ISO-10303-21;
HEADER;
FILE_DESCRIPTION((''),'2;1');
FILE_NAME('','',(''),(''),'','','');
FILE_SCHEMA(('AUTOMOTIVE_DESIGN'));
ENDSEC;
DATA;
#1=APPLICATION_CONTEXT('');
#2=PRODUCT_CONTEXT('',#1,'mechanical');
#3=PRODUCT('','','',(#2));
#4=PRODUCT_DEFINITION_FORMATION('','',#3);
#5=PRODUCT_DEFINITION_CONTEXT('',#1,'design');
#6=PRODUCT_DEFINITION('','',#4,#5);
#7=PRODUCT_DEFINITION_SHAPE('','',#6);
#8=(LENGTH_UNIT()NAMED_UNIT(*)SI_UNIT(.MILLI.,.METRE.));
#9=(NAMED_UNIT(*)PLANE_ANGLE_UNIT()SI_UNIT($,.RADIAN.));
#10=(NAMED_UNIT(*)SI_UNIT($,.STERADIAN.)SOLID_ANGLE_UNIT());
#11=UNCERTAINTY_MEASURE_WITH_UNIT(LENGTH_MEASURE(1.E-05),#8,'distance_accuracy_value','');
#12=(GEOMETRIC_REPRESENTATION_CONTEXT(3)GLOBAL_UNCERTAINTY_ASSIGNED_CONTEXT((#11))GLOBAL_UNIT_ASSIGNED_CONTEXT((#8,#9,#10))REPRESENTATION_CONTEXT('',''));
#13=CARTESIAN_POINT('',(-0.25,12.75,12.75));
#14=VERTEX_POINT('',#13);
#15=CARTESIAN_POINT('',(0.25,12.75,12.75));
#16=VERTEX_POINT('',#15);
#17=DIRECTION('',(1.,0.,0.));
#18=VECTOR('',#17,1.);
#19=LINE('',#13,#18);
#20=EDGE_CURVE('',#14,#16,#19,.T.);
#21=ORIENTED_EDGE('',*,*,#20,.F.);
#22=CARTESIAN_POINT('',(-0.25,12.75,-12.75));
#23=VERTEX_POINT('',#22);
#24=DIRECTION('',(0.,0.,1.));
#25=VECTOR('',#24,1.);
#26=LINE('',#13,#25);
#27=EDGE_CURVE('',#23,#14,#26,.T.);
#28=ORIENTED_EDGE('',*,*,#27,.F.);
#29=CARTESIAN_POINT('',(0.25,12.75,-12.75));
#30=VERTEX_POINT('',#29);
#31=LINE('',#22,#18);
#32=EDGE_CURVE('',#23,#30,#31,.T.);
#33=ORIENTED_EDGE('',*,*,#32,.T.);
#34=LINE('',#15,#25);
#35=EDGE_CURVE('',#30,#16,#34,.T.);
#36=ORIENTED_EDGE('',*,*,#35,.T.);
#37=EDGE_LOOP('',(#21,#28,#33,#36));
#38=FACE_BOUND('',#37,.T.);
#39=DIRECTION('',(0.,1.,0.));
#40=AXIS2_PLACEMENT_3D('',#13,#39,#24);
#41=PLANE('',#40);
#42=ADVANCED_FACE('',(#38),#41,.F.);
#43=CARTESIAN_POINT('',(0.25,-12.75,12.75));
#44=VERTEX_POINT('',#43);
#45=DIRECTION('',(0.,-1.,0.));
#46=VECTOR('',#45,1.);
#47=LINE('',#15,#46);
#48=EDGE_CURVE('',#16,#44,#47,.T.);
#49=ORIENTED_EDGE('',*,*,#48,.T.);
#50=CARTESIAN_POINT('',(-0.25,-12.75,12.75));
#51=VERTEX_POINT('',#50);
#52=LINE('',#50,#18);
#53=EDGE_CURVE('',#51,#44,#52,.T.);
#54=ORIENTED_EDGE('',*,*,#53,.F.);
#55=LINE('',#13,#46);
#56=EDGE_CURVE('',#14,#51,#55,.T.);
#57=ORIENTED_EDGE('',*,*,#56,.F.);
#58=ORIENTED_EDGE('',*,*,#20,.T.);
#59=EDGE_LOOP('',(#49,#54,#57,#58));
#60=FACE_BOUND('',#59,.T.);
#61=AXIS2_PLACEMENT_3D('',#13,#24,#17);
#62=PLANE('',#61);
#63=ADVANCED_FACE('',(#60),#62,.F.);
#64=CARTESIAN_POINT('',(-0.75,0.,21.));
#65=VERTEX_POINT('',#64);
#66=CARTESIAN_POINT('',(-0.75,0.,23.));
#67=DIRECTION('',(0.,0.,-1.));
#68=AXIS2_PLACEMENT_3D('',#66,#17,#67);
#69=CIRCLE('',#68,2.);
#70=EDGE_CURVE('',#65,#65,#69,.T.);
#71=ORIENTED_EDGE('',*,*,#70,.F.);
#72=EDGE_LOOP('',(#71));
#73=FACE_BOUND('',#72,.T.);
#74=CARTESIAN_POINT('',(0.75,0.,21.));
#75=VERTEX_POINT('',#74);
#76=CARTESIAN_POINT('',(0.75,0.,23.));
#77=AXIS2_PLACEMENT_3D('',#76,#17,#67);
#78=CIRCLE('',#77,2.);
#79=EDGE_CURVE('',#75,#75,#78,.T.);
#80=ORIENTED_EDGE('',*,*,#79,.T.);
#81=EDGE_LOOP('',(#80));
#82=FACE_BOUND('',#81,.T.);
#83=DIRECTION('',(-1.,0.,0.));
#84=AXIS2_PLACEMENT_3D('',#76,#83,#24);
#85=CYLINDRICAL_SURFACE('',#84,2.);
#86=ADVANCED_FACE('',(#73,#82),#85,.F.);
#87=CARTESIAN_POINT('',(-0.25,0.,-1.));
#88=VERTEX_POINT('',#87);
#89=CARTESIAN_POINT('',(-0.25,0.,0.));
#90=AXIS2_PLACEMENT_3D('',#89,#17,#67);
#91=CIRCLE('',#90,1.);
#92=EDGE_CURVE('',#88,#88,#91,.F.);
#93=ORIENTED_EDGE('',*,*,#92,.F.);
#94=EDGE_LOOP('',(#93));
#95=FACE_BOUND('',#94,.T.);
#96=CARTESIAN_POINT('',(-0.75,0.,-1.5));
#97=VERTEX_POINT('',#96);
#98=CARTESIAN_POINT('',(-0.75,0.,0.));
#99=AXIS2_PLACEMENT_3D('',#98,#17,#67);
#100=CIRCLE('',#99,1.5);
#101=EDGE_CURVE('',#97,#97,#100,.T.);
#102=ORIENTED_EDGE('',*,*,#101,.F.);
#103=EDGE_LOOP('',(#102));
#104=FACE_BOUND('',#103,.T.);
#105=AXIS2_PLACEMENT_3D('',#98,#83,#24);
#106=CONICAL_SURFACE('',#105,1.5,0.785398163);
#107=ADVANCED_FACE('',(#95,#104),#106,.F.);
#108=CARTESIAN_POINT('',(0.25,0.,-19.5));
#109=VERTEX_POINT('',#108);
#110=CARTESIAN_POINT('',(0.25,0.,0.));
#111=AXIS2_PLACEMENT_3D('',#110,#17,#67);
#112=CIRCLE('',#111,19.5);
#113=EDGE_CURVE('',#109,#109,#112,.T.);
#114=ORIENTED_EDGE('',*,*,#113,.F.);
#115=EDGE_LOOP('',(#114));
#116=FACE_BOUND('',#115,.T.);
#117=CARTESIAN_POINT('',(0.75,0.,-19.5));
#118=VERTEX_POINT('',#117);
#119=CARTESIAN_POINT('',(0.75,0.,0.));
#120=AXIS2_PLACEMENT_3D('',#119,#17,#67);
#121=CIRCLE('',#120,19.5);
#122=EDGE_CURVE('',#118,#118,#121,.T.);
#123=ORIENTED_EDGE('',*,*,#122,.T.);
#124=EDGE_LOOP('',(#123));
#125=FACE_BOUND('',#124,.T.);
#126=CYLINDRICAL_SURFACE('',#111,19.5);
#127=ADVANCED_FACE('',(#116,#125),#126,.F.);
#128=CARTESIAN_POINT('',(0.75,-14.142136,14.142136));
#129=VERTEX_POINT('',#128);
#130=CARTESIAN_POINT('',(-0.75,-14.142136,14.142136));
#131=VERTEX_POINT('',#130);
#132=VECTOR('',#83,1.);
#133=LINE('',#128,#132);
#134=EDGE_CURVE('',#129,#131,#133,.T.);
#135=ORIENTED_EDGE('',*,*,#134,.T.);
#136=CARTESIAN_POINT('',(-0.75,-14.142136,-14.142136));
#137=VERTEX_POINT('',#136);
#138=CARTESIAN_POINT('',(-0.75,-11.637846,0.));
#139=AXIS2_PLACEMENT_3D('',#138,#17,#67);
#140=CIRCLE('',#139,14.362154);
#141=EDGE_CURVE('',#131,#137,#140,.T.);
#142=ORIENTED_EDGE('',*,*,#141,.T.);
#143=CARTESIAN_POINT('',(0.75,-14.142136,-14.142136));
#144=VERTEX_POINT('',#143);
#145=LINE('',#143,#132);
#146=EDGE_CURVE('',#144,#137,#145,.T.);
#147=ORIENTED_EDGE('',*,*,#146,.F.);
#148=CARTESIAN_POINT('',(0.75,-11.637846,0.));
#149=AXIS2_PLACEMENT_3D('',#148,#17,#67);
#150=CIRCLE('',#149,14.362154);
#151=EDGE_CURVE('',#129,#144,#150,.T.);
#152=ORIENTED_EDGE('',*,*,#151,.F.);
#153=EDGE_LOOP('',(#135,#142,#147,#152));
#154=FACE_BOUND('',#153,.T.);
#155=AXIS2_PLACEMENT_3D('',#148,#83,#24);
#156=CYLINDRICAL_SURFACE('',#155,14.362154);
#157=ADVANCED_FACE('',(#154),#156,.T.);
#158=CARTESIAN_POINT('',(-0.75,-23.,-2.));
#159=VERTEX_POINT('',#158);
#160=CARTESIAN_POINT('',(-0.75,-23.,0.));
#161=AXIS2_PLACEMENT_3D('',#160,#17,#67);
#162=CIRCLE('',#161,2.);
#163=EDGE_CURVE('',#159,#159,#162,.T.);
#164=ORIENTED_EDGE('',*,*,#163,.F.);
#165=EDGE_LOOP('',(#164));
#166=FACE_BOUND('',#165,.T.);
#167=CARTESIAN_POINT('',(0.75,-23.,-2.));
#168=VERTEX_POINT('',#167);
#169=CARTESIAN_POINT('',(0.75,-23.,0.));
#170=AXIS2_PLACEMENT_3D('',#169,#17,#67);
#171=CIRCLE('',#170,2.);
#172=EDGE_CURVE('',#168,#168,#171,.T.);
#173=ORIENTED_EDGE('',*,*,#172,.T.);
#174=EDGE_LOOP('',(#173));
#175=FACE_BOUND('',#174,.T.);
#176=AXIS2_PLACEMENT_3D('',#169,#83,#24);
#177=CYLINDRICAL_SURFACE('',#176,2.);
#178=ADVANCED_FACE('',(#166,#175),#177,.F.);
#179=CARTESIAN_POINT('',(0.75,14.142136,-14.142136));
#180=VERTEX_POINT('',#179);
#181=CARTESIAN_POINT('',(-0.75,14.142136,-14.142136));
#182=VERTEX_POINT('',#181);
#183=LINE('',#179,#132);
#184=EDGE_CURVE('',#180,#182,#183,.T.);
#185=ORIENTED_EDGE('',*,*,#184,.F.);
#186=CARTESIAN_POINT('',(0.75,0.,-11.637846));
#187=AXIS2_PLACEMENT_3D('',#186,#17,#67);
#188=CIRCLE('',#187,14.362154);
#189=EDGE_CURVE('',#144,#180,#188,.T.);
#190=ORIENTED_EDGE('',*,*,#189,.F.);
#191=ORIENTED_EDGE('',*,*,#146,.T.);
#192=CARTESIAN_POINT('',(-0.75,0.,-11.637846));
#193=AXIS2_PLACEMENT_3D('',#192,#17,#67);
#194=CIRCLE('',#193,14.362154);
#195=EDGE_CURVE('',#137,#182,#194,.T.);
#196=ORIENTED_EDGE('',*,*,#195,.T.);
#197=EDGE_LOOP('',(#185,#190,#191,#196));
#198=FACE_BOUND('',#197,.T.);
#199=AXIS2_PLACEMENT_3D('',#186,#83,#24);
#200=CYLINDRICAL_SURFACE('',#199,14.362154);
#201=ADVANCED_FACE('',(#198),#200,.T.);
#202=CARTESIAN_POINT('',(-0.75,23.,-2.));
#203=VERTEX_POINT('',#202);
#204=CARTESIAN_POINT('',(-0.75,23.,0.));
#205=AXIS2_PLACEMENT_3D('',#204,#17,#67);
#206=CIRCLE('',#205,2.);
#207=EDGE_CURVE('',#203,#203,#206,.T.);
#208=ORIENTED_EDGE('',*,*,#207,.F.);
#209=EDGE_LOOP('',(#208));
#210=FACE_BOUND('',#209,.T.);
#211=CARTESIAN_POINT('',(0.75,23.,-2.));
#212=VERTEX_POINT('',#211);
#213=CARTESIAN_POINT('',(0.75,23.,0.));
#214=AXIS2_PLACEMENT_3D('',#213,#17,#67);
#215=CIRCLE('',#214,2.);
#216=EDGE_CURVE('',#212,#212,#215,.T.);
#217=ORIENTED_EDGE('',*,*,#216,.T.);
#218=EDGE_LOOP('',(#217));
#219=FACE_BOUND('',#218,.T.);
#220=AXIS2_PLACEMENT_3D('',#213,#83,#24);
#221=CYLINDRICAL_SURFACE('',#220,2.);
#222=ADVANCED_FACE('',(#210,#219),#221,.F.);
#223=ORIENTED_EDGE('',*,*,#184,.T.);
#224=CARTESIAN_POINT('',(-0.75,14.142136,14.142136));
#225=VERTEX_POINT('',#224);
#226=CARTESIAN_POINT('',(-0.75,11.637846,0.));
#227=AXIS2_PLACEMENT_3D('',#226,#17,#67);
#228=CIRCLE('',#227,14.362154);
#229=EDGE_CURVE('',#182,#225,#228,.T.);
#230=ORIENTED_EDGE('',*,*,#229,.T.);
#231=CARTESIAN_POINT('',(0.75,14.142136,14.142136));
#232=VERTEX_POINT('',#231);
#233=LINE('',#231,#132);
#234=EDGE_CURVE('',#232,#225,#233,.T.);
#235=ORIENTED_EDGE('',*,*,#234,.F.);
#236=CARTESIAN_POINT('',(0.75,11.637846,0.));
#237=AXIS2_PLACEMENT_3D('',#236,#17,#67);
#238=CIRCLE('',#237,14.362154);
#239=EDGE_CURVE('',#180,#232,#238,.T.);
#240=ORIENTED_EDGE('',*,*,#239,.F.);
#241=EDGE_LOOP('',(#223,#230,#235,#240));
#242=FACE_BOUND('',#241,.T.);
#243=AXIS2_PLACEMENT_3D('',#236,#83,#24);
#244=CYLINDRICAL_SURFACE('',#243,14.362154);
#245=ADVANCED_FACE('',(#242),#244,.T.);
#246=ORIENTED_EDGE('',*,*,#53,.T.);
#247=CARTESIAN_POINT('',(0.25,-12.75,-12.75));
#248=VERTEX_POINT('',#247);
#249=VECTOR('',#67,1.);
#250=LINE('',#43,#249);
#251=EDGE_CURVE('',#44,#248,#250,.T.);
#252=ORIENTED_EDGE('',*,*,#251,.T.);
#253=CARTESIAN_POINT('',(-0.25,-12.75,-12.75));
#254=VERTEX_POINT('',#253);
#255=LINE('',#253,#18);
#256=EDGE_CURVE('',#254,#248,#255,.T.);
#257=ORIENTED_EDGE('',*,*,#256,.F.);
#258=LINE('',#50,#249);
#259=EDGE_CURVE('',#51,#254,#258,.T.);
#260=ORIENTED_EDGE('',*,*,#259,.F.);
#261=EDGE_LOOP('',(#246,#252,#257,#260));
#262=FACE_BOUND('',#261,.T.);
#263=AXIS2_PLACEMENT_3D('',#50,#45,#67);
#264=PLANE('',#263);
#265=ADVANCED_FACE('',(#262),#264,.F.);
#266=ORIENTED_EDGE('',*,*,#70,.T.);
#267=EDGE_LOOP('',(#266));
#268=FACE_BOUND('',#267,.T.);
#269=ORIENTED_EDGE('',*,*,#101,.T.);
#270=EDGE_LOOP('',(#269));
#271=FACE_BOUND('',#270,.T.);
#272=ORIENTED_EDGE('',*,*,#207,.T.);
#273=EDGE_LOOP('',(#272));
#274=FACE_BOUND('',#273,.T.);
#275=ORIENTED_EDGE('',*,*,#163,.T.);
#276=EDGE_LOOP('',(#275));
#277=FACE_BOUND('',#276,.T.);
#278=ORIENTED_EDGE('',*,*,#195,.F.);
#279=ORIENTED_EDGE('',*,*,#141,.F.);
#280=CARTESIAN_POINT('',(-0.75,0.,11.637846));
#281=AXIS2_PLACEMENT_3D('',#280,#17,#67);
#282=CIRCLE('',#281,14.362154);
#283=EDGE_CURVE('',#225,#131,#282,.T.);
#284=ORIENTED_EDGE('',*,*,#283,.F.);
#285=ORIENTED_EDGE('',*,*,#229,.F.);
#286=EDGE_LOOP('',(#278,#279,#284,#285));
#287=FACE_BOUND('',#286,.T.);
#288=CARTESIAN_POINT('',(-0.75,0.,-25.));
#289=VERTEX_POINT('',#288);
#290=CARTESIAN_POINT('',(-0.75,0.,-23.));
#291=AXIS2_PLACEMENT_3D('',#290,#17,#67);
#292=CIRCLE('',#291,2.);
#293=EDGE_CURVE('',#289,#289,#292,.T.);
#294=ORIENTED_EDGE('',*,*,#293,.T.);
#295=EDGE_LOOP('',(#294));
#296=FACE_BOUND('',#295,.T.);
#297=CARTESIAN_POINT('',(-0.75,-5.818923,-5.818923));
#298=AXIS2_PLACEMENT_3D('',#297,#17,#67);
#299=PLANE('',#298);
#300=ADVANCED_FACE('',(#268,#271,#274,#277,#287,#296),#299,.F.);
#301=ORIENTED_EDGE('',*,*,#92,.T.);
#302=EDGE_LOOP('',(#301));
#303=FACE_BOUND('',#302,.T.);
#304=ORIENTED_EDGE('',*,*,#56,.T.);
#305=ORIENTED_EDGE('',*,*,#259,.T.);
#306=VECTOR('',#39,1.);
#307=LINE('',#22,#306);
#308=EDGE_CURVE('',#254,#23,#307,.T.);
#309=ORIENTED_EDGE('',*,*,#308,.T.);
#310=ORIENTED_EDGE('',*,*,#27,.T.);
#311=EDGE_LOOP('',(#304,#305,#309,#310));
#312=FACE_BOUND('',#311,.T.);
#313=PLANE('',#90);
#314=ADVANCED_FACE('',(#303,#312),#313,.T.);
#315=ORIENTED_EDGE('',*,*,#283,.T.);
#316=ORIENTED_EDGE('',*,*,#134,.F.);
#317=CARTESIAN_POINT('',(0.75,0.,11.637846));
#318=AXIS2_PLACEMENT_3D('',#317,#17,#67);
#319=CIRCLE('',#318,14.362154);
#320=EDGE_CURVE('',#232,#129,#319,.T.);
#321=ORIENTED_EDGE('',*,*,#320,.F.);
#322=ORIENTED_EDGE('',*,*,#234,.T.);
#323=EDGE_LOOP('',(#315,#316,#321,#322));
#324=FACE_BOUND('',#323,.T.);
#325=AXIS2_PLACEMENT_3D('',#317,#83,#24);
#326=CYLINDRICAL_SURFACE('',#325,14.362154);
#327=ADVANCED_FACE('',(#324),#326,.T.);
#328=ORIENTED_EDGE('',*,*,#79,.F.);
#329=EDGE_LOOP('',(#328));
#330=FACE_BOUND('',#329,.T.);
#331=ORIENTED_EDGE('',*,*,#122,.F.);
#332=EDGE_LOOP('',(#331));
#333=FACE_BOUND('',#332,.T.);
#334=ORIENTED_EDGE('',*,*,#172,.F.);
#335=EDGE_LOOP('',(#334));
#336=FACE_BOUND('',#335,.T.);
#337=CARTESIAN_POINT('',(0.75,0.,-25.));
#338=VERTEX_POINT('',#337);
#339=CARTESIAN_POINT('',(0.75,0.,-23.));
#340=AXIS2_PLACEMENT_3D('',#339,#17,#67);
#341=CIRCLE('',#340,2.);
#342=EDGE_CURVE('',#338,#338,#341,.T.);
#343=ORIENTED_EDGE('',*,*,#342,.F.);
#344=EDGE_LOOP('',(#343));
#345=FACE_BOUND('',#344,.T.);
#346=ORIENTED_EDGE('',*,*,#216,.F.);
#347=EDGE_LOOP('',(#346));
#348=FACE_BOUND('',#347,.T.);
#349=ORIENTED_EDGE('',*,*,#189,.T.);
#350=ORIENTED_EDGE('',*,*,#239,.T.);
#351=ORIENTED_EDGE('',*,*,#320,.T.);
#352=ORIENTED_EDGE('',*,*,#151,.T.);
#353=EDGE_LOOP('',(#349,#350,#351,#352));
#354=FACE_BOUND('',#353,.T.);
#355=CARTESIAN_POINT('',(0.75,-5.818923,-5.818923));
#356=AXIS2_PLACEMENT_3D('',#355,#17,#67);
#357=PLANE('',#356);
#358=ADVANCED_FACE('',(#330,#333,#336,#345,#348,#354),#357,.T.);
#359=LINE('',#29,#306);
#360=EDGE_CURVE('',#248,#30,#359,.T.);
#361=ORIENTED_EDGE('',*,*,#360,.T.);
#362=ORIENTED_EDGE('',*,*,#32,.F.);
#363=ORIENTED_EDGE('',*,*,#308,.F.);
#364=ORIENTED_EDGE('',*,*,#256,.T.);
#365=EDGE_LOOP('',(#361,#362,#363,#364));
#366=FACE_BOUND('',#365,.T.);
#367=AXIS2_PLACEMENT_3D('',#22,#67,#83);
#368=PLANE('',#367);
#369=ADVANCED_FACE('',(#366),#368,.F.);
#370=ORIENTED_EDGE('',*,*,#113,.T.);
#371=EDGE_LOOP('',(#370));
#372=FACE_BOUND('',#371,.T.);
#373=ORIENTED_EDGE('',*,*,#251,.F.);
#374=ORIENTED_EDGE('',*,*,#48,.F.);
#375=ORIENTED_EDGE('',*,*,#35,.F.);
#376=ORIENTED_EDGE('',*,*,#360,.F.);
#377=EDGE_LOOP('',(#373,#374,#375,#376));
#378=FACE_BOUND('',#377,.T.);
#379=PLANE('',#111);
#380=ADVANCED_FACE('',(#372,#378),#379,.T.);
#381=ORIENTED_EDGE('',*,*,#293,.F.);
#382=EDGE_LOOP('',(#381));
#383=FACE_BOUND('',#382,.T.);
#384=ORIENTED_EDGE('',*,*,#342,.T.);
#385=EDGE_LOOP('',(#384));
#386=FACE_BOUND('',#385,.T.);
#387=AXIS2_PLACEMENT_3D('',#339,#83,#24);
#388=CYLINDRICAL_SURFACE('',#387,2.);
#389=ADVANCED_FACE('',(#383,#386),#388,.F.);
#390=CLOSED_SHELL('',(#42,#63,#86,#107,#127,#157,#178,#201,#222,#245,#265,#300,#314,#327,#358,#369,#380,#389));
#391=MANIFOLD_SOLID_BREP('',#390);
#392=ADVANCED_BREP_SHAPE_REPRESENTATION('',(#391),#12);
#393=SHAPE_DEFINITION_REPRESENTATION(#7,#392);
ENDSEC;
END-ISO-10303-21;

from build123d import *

# Parameters (mm, degrees)
SKETCH2_R          = 2
BODY_DEPTH         = 0.75
SKETCH3_R          = 19.5
O_RING_SEAT_DEPTH  = 0.5
SKETCH11_W         = 25.5
SKETCH11_H         = 25.5
MESH_RECESS_DEPTH  = 0.5
SKETCH12_R         = 0.5
CUT_EXTRUDE4_DEPTH = 37.783148315
CHAMFER1_SIZE      = 1


with BuildPart() as part:
    # Sketch2 → Body (new, symmetric)
    with BuildSketch(Plane(origin=(0, 0, 0), x_dir=(0, 0, -1), z_dir=(1, 0, 0))):
        with BuildLine():
            ThreePointArc((-14.142135624, 14.142135624), (-26, 0), (-14.142135624, -14.142135624))
            ThreePointArc((-14.142135624, -14.142135624), (0, -26), (14.142135624, -14.142135624))
            ThreePointArc((14.142135624, -14.142135624), (26, 0), (14.142135624, 14.142135624))
            ThreePointArc((14.142135624, 14.142135624), (0, 26), (-14.142135624, 14.142135624))
        make_face()
        with Locations((0, 23)):
            Circle(SKETCH2_R, mode=Mode.SUBTRACT)
        with Locations((23, 0)):
            Circle(SKETCH2_R, mode=Mode.SUBTRACT)
        with Locations((0, -23)):
            Circle(SKETCH2_R, mode=Mode.SUBTRACT)
        with Locations((-23, 0)):
            Circle(SKETCH2_R, mode=Mode.SUBTRACT)
    extrude(amount=BODY_DEPTH, both=True)

    # Sketch3 → O-Ring Seat (cut)
    with BuildSketch(Plane(origin=(0.75, 0, 0), x_dir=(0, 0, -1), z_dir=(1, 0, 0))):
        Circle(SKETCH3_R)
    extrude(amount=-O_RING_SEAT_DEPTH, mode=Mode.SUBTRACT)

    # Sketch11 → Mesh Recess (cut)
    with BuildSketch(Plane(origin=(0.25, 0, 0), x_dir=(0, 0, -1), z_dir=(1, 0, 0))):
        Rectangle(SKETCH11_W, SKETCH11_H)
    extrude(amount=-MESH_RECESS_DEPTH, mode=Mode.SUBTRACT)

    # Sketch12 → Cut-Extrude4 (cut, through all)
    with BuildSketch(Plane(origin=(-0.25, 0, 0), x_dir=(0, 0, -1), z_dir=(1, 0, 0))):
        Circle(SKETCH12_R)
    extrude(amount=-CUT_EXTRUDE4_DEPTH, mode=Mode.SUBTRACT)

    # Chamfer1
    # the kernel refuses this chamfer: 1 mm, written as the material it takes off along each edge
    with BuildSketch(Plane(origin=(-0.75, 0, 0), x_dir=(0, 0, -1), z_dir=(0, -1, 0))) as chamfer1_piece_1:
        Polygon((0.5 + CHAMFER1_SIZE, 0), (0.5, CHAMFER1_SIZE), (0.5, 0), align=None)
    revolve(axis=Axis((-0.75, 0, 0), (1, 0, 0)), mode=Mode.SUBTRACT)


solid = part.part
